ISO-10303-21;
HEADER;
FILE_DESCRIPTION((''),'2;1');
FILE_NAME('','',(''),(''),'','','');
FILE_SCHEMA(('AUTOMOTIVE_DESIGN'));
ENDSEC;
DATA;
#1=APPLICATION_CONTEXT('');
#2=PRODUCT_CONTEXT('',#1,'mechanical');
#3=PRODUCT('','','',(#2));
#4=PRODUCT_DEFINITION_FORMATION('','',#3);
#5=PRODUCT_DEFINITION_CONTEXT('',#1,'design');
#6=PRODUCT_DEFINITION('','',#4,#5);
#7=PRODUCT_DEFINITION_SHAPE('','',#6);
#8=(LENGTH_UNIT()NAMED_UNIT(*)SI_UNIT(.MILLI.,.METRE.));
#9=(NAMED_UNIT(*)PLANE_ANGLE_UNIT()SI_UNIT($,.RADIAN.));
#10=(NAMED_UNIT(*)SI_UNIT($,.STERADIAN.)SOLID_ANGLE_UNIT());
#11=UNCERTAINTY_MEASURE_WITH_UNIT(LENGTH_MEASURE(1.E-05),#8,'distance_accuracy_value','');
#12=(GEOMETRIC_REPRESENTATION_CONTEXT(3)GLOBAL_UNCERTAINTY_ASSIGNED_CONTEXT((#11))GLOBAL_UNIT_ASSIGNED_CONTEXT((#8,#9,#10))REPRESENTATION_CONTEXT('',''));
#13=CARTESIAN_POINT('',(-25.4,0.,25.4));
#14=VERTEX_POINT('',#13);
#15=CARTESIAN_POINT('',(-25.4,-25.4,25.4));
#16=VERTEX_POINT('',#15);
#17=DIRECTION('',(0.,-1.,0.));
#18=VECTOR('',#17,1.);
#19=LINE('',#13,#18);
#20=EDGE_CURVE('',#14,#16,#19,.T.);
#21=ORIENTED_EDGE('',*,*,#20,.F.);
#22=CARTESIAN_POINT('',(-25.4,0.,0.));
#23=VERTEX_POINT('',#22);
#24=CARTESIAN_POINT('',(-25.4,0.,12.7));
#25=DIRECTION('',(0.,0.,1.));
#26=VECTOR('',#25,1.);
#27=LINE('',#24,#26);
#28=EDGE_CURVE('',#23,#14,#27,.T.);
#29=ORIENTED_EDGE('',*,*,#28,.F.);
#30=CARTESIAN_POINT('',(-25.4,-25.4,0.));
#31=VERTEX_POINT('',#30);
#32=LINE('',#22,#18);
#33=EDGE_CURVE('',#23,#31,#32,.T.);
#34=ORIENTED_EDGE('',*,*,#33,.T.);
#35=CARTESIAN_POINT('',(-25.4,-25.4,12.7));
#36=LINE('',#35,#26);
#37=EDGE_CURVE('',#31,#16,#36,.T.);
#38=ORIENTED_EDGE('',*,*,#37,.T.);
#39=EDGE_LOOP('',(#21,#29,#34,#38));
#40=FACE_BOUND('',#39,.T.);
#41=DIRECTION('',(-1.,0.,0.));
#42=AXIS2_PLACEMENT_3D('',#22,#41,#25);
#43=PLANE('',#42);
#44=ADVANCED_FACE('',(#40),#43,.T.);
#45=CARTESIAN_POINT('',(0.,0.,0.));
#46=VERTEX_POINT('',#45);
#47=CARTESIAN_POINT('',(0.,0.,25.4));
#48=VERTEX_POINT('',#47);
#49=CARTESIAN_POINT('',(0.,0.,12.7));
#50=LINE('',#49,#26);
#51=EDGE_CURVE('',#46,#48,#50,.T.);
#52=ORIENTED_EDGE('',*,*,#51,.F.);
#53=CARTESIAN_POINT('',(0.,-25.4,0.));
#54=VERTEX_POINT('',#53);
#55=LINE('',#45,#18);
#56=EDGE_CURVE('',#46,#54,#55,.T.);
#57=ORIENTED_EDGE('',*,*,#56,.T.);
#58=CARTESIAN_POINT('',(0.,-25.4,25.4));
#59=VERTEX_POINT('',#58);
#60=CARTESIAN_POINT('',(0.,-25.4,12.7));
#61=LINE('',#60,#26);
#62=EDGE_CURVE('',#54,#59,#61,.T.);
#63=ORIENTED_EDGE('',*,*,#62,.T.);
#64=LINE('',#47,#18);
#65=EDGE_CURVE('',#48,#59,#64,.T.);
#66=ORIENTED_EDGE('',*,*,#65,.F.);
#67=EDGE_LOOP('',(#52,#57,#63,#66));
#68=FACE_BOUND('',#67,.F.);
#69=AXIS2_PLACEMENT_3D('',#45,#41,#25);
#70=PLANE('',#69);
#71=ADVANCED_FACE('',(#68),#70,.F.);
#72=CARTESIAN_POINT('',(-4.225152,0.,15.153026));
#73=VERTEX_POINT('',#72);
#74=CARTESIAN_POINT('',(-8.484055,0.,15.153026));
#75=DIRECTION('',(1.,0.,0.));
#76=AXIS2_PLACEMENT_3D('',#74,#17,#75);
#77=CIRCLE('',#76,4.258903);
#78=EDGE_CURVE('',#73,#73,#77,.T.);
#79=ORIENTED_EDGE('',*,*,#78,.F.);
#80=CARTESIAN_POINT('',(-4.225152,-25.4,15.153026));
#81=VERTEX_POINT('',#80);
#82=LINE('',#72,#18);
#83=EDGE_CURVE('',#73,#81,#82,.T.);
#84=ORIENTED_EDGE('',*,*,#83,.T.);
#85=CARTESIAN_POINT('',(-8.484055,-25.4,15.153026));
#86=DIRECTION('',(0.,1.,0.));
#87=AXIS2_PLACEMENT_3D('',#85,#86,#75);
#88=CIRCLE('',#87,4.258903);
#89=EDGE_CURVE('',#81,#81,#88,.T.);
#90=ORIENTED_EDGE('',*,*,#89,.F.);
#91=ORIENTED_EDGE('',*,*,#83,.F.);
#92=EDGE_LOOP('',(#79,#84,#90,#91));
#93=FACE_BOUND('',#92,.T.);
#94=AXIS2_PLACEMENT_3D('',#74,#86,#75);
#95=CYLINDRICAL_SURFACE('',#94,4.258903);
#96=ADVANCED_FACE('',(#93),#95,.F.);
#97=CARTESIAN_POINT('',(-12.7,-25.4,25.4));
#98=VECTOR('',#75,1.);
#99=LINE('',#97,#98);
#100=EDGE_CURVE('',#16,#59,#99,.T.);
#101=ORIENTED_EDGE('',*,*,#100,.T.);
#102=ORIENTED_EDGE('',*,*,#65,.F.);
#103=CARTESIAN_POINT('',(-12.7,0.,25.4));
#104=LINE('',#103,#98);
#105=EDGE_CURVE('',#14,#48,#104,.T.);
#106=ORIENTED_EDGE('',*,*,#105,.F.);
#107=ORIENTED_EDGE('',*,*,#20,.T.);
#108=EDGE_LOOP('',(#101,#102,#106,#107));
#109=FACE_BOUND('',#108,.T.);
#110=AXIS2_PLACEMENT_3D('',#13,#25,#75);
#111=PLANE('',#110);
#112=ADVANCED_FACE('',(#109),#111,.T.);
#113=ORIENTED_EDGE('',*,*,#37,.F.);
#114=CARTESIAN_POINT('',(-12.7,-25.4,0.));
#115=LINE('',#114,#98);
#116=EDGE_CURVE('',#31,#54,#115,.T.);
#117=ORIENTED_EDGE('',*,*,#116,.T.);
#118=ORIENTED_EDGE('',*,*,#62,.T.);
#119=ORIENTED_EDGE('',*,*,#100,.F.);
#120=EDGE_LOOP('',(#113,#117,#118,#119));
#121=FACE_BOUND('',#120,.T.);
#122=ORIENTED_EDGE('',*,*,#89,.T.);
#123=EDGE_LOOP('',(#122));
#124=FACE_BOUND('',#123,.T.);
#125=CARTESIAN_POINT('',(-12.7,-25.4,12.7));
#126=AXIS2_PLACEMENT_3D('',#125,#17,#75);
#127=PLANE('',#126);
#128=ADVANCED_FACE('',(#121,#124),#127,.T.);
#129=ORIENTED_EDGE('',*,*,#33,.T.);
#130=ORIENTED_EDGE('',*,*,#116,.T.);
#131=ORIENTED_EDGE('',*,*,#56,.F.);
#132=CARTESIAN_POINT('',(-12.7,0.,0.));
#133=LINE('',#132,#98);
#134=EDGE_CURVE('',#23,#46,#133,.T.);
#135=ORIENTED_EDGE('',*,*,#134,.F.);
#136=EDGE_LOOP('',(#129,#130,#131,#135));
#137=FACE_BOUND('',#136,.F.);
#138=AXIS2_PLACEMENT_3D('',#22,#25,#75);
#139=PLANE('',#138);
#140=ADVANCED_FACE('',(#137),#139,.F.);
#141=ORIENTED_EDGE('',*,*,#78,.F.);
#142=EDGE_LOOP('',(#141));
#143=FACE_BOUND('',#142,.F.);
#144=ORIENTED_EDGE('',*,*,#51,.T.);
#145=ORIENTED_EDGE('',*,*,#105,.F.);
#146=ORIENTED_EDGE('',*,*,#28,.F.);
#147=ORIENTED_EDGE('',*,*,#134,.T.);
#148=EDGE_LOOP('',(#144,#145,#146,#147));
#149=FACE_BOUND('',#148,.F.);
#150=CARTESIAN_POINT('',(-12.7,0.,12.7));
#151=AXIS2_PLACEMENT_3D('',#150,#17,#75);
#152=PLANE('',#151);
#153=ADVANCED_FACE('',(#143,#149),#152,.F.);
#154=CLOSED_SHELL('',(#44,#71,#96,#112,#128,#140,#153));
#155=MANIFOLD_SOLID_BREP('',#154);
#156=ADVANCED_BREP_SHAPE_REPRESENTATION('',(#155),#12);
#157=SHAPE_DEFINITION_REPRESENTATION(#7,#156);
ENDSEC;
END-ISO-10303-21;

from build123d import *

# Parameters (mm, degrees)
F0_W     = 25.4
F0_H     = 25.4
F2_DEPTH = 25.4
F5_R     = 4.2589034539
F6_DEPTH = 38.862


# Not quite as in the source:
# - a feature of the source that left no trace in its solid (it failed there, or was rolled back) is left out


with BuildPart() as f2:
    # F0 (on Front) → F2 (new body)
    with BuildSketch(Plane.XZ):
        with Locations((-12.7, 12.7)):
            Rectangle(F0_W, F0_H)
    extrude(amount=F2_DEPTH)

    # F5 (on Front) → F6 (cut)
    with BuildSketch(Plane.XZ):
        with Locations((-8.4840552881, 15.1530262083)):
            Circle(F5_R)
    extrude(amount=F6_DEPTH, mode=Mode.SUBTRACT)


solid = f2.part
